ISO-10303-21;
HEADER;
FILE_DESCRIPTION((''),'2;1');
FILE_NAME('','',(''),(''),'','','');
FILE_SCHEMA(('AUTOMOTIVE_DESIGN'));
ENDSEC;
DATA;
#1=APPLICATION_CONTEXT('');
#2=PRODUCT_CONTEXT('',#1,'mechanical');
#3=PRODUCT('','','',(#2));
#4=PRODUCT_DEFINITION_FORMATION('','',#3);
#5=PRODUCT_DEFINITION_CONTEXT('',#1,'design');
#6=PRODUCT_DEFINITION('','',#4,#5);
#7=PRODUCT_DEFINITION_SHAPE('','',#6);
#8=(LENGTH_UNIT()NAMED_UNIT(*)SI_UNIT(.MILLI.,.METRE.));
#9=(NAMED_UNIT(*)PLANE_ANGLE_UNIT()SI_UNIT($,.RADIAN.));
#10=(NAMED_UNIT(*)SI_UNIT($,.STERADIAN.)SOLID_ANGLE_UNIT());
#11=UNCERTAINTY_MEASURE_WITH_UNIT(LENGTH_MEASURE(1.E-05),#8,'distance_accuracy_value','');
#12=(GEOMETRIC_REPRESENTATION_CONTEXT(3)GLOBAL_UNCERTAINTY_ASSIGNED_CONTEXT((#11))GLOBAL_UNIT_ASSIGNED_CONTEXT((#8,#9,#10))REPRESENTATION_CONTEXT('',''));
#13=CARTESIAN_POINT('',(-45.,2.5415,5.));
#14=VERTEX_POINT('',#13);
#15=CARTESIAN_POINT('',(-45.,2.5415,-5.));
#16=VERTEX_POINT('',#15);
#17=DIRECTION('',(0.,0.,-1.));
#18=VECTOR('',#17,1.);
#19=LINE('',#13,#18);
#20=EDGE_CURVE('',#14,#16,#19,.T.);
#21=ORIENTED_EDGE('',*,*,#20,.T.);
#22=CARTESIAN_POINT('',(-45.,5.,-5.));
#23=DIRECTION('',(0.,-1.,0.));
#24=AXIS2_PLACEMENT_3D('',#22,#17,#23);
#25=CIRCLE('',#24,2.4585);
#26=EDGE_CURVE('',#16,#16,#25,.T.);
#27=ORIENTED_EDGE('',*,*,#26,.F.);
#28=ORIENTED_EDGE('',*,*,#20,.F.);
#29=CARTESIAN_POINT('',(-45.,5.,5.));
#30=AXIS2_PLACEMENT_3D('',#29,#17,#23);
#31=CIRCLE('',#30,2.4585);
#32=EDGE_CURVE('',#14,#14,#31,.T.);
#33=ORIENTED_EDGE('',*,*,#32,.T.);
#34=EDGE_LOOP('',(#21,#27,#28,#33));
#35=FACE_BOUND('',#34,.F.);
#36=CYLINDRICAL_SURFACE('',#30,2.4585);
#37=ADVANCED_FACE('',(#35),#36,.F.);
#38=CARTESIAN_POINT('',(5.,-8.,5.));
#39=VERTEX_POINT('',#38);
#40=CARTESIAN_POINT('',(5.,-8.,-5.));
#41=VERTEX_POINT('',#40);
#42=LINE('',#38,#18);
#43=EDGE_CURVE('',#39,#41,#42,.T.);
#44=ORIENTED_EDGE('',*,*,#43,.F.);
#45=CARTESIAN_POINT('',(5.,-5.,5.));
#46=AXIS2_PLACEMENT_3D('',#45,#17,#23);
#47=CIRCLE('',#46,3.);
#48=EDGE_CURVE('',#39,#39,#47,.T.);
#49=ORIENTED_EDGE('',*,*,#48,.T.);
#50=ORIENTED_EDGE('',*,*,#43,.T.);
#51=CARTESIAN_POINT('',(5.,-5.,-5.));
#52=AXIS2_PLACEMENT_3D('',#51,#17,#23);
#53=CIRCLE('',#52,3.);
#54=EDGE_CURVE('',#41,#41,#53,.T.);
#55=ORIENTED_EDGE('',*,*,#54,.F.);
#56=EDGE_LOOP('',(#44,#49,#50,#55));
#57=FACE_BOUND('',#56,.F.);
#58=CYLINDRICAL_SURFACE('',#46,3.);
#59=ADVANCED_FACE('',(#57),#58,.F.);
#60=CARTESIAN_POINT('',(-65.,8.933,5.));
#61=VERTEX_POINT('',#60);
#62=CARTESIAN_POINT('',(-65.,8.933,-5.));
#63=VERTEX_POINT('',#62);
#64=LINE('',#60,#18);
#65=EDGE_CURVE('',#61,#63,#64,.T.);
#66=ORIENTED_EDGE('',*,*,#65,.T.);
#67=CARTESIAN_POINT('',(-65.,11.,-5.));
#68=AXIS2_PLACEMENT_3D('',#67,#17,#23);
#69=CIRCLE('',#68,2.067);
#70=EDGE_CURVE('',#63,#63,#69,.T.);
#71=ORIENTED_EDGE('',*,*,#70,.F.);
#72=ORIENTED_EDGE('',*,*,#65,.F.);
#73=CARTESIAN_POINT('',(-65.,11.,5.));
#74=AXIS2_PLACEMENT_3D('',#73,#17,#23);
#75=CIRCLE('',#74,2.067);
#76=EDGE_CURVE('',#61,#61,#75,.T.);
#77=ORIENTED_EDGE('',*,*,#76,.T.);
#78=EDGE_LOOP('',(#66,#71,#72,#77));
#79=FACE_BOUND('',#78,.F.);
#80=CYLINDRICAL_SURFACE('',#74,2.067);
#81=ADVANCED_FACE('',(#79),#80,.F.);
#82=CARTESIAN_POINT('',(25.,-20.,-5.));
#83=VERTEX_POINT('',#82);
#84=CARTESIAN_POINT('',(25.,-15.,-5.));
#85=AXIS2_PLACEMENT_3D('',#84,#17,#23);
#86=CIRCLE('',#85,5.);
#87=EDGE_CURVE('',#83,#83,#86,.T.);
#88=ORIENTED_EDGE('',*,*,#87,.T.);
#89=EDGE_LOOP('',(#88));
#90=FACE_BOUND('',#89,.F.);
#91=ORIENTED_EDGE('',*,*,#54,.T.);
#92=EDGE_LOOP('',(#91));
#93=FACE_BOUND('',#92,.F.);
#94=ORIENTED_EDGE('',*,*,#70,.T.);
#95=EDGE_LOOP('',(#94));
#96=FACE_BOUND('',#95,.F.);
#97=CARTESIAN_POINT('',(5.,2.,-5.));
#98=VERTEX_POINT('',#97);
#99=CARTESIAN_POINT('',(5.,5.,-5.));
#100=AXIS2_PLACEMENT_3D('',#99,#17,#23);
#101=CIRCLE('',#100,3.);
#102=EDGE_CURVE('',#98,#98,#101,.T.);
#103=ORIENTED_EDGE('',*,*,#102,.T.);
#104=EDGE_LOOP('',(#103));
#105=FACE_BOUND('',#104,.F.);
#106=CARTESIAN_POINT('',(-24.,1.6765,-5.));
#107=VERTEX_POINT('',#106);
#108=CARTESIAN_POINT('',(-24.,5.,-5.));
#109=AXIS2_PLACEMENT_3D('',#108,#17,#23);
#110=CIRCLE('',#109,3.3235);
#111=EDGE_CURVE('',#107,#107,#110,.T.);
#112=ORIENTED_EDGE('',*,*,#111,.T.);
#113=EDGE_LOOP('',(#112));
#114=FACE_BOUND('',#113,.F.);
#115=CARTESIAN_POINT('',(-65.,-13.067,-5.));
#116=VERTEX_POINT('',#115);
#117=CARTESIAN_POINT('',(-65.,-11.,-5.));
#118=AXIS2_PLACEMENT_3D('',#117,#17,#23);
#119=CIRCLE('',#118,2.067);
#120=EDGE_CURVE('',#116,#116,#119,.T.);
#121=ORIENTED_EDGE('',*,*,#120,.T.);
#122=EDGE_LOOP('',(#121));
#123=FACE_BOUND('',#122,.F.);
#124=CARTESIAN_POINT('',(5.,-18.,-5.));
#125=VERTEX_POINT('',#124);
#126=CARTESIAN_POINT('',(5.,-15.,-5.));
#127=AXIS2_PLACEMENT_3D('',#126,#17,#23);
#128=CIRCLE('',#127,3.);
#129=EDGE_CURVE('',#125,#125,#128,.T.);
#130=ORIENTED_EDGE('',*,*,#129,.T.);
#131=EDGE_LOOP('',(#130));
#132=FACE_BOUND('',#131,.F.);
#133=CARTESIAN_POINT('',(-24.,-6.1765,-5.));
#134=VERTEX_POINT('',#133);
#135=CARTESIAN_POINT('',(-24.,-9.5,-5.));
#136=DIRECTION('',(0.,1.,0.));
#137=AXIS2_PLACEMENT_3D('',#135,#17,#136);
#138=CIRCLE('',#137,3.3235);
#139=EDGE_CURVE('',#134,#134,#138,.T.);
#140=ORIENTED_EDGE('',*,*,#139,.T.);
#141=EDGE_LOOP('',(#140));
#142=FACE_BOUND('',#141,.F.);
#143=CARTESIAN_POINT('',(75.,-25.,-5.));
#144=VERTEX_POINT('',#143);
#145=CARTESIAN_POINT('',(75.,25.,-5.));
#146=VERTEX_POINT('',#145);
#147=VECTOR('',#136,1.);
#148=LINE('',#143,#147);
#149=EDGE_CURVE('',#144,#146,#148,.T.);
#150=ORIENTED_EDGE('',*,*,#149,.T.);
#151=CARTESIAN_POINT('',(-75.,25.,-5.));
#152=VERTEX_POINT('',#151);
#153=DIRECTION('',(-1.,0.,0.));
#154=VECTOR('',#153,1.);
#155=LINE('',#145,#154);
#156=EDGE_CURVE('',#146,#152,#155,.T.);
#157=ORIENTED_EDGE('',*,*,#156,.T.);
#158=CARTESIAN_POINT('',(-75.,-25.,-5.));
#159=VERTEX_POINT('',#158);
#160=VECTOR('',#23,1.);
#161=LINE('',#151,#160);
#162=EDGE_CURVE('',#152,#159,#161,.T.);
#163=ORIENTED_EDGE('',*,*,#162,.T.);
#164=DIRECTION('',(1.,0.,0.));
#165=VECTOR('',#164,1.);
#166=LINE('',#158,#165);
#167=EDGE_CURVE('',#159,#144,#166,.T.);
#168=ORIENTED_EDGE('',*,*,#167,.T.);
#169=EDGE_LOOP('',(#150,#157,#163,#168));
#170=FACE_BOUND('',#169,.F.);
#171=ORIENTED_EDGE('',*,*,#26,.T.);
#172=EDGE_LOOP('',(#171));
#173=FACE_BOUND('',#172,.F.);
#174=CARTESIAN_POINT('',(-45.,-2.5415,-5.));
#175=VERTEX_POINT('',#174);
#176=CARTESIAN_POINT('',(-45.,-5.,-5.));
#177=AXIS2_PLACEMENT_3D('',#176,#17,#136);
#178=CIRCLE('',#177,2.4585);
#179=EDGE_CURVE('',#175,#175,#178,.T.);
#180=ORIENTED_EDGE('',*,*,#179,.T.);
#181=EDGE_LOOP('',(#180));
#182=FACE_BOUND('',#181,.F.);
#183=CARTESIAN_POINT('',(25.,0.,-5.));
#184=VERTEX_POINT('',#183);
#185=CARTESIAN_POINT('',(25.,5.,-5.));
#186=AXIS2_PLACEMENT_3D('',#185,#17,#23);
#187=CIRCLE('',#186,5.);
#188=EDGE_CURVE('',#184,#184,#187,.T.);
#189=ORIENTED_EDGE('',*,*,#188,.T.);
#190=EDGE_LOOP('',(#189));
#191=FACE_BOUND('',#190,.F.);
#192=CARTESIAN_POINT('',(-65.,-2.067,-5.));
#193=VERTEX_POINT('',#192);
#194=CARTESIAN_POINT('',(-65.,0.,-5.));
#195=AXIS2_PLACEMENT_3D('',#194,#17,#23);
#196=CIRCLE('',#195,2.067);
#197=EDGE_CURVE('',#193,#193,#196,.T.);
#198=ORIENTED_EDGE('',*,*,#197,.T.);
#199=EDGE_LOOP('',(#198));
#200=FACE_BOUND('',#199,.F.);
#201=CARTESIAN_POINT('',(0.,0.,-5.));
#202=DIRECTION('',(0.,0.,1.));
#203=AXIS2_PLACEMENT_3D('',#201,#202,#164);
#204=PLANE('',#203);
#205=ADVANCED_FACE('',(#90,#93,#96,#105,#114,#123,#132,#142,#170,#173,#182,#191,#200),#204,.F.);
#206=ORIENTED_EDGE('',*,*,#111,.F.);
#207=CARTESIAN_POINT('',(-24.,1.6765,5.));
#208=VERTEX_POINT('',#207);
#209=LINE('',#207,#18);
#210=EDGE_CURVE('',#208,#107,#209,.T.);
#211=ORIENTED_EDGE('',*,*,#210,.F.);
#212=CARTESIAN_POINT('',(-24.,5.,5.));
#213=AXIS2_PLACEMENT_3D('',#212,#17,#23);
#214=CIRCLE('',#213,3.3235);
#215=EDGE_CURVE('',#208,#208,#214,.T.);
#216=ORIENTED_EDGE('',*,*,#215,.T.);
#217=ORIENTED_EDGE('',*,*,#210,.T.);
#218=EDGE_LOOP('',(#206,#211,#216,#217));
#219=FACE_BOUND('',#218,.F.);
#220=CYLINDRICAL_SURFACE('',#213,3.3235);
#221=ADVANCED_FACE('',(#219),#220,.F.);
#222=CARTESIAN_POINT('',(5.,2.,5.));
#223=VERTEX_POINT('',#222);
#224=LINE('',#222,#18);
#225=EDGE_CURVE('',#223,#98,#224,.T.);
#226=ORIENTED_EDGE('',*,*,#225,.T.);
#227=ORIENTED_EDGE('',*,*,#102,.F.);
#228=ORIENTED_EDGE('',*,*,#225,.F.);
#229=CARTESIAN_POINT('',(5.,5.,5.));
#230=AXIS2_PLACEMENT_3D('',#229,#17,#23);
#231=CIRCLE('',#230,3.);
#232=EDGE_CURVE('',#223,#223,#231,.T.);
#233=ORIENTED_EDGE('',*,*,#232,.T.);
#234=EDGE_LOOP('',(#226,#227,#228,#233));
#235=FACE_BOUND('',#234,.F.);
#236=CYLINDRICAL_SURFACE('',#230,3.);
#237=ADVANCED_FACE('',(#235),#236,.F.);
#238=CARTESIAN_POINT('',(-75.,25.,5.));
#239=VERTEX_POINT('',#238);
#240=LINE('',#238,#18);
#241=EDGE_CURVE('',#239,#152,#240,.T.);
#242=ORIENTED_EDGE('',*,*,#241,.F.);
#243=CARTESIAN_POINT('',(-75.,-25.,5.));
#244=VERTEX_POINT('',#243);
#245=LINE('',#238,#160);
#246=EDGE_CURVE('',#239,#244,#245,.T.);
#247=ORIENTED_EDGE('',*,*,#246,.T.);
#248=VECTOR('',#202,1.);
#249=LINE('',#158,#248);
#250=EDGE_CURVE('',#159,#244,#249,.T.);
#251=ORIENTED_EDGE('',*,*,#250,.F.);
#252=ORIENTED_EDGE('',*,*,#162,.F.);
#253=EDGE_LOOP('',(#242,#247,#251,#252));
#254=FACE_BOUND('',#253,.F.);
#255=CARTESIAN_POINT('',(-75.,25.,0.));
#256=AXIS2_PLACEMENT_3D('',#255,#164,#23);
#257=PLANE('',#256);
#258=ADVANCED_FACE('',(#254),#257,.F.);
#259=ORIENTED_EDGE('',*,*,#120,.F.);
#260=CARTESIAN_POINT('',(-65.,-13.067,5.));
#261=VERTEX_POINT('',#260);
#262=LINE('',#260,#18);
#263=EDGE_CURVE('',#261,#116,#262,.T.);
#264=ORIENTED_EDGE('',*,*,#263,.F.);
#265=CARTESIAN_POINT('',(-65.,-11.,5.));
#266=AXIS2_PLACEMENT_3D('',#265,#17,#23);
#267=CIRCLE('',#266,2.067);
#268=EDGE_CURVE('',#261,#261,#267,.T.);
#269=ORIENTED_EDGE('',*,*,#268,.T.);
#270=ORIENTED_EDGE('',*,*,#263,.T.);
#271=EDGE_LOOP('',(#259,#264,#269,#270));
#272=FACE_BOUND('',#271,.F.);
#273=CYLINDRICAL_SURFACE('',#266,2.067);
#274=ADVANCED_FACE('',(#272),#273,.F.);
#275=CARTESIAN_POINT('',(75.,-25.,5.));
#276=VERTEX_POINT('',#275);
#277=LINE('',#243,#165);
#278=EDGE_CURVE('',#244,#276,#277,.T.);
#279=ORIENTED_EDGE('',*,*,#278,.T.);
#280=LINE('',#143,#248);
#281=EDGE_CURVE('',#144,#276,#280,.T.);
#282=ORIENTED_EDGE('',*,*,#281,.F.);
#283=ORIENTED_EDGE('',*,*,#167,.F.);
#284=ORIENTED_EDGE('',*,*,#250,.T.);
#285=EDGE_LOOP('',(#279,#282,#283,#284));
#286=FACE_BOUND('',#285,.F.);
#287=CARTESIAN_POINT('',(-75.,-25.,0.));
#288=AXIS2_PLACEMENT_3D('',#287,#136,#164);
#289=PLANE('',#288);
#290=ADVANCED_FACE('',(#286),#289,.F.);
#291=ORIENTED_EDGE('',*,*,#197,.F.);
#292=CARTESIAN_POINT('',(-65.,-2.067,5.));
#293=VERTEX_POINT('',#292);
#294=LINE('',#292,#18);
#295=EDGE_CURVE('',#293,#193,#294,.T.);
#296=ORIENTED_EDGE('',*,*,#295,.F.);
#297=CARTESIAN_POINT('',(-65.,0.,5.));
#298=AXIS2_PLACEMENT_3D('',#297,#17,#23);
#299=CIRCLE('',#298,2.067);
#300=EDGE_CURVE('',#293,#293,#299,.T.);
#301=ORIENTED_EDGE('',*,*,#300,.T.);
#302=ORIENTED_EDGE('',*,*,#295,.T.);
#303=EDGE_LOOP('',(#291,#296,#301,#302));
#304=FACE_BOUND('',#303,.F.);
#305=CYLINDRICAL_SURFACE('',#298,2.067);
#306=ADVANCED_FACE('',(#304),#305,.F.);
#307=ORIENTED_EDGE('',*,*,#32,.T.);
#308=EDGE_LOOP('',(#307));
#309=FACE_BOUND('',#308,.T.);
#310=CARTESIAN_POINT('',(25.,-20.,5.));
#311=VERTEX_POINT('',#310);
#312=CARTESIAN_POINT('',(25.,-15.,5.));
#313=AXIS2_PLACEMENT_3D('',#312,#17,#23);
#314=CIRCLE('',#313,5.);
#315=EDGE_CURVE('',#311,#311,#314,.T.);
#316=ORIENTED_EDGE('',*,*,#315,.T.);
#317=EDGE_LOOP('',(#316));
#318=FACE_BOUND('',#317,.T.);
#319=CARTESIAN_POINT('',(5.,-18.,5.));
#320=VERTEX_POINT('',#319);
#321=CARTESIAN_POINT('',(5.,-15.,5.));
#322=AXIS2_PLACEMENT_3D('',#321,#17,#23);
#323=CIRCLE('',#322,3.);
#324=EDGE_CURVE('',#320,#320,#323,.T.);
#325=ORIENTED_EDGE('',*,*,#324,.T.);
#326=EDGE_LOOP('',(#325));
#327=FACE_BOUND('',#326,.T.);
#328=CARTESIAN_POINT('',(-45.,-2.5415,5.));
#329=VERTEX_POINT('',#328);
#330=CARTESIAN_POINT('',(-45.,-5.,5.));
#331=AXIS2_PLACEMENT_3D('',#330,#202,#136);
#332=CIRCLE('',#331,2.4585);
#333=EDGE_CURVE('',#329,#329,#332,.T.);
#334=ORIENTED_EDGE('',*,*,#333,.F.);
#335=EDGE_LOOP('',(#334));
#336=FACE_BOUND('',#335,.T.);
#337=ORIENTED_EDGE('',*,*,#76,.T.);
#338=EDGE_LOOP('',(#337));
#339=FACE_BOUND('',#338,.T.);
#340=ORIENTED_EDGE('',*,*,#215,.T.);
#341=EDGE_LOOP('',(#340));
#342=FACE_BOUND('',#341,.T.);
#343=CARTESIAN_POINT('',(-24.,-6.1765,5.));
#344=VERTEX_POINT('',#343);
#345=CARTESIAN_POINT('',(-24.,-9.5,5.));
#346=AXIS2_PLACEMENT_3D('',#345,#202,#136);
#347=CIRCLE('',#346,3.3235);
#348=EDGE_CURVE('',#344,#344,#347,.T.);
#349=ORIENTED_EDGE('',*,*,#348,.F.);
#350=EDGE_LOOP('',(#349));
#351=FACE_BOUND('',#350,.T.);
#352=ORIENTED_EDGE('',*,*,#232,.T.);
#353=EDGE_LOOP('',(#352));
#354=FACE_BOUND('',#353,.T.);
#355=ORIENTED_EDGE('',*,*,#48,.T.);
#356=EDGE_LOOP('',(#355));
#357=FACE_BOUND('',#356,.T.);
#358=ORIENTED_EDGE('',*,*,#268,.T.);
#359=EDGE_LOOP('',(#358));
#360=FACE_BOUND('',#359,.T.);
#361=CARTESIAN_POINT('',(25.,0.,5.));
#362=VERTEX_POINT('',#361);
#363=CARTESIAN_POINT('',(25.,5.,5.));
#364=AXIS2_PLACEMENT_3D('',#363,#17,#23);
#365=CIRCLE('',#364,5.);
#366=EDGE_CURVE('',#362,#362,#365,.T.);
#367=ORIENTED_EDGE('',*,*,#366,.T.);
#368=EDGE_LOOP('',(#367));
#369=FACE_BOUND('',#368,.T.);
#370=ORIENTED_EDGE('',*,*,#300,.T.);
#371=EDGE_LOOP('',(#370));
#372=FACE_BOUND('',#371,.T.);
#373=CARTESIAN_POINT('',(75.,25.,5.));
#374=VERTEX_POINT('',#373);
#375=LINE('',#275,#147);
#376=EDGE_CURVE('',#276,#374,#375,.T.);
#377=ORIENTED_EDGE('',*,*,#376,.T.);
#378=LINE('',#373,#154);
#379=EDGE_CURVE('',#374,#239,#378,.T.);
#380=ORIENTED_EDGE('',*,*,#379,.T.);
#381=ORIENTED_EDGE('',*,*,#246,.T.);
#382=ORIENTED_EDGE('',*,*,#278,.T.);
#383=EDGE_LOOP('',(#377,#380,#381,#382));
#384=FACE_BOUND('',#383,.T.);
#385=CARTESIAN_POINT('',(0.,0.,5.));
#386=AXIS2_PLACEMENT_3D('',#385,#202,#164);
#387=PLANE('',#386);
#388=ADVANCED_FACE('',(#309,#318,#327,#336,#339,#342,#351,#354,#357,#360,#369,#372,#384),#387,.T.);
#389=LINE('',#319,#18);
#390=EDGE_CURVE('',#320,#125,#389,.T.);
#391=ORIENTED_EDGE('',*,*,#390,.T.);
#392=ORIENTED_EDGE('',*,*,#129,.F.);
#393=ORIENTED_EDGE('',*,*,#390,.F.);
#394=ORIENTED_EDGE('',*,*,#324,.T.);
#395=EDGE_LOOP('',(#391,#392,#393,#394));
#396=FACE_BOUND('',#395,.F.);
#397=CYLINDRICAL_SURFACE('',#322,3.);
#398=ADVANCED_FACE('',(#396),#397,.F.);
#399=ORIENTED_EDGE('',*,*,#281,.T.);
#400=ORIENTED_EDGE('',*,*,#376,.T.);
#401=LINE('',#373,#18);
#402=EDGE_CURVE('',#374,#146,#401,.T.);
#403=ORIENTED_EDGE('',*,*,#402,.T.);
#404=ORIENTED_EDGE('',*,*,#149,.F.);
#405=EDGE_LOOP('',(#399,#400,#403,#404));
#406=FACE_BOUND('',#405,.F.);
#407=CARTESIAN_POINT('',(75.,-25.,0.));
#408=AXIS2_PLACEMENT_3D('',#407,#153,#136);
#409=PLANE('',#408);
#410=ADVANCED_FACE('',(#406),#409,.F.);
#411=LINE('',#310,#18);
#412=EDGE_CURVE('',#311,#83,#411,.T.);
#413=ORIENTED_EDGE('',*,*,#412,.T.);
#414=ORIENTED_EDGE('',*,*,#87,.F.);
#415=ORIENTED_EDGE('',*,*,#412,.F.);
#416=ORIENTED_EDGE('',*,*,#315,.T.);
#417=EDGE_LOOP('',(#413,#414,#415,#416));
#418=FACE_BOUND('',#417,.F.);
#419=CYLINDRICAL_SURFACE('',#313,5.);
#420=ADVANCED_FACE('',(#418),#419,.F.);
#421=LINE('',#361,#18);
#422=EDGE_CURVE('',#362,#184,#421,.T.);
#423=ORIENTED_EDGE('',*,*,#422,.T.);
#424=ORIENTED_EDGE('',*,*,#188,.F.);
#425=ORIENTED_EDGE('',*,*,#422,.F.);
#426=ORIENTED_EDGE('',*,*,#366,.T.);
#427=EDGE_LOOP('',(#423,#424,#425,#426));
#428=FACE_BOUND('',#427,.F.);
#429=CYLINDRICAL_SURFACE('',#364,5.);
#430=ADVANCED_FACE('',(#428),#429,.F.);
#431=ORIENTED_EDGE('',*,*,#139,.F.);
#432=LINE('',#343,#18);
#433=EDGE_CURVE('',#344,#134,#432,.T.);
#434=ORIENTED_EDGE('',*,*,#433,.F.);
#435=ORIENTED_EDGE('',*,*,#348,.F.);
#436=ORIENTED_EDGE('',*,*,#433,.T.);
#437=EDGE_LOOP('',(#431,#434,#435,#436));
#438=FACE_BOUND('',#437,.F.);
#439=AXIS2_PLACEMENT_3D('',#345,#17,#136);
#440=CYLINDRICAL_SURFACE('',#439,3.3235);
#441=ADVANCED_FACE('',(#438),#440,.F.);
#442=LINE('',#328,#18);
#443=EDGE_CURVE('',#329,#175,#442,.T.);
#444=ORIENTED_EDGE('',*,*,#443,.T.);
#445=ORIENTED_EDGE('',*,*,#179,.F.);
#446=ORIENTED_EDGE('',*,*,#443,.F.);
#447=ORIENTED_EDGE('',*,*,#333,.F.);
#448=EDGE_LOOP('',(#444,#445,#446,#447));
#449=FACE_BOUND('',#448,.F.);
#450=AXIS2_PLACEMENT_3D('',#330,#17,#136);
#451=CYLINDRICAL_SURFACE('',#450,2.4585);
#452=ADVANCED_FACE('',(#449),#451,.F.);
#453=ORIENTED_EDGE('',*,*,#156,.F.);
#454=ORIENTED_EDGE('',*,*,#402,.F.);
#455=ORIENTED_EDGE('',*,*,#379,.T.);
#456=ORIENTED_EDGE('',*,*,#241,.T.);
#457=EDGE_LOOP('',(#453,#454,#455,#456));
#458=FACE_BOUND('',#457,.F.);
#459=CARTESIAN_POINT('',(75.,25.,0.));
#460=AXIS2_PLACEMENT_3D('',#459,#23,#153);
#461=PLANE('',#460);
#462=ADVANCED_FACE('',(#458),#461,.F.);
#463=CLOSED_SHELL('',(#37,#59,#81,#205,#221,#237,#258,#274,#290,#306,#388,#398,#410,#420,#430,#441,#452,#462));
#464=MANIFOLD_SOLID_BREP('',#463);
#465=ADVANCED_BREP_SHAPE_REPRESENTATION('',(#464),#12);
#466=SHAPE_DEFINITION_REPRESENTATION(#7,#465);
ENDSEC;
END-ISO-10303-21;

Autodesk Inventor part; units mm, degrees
ref_plane "YZ Plane" through (0, 0, 0) normal (1, 0, 0) x (0, 1, 0)
ref_plane "XY Plane" through (0, 0, 0) normal (0, 0, 1) x (1, 0, 0)
sketch "Sketch2" plane through (0, 0, 0) normal (0, 0, 1) x (1, 0, 0)
  line L0 (-75, -25) -> (75, -25)
  line L1 (75, -25) -> (75, 25)
  line L2 (75, 25) -> (-75, 25)
  line L3 (-75, 25) -> (-75, -25)
  line L4 (-75, -25) -> (75, 25) construction
  line L5 (75, -25) -> (-75, 25) construction
  point P0 (0, 0)
  dimension "d1" = 150
  dimension "d2" = 50
extrude "Extrusion1" add sketch "Sketch2" along normal mid plane 10
sketch "Sketch3" plane through (0, 0, 5) normal (0, 0, 1) x (1, 0, 0)
  line L0 (-75, 25) -> (-75, -25) projected
  line L1 (75, 25) -> (-75, 25) projected
  point P0 (0, 0)
  point P1 (-65, 0)
  dimension "d40" = 10
  dimension "d43" = 25
hole "Hole1" at (-65, 0, 5) direction (0, 0, -1) diameter 4.134 depth 14.2 tip angle 118 thread size "M5x0.8" class "6H" standard "TS profile"
sketch "Sketch4" plane through (0, 0, 5) normal (0, 0, 1) x (1, 0, 0)
  line L0 (-75, 25) -> (-75, -25) projected
  line L1 (75, 25) -> (-75, 25) projected
  point P0 (0, 0)
  point P1 (-45, 5)
  dimension "d41" = 30
  dimension "d42" = 20
hole "Hole2" at (-45, 5, 5) direction (0, 0, -1) diameter 4.917 depth 17.1 tip angle 118 thread size "M6x1" class "6H" standard "TS profile"
sketch "Sketch5" plane through (0, 0, 5) normal (0, 0, 1) x (1, 0, 0)
  line L0 (-75, 25) -> (-75, -25) projected
  line L1 (75, 25) -> (-75, 25) projected
  point P0 (0, 0)
  point P1 (-24, 5)
  dimension "d44" = 51
  dimension "d45" = 20
hole "Hole3" at (-24, 5, 5) direction (0, 0, -1) diameter 6.647 depth 22.2 tip angle 118 thread size "M8x1.25" class "6H" standard "TS profile"
sketch "Sketch6" plane through (0, 0, 5) normal (0, 0, 1) x (1, 0, 0)
  line L0 (-75, 25) -> (-75, -25) projected
  line L1 (75, 25) -> (-75, 25) projected
  point P0 (0, 0)
  point P1 (5, 5)
  dimension "d46" = 80
  dimension "d47" = 20
hole "Hole4" at (5, 5, 5) direction (0, 0, -1) diameter 6 depth 14.2 tip angle 118
sketch "Sketch7" plane through (0, 0, 5) normal (0, 0, 1) x (1, 0, 0)
  line L0 (-75, 25) -> (-75, -25) projected
  line L1 (75, 25) -> (-75, 25) projected
  point P0 (0, 0)
  point P1 (25, 5)
  dimension "d48" = 100
  dimension "d49" = 20
hole "Hole5" at (25, 5, 5) direction (0, 0, -1) diameter 10 depth 14.2 tip angle 118
pattern_linear "Rectangular Pattern1" count 3 spacing 11 along (0, -1, 0) of "Hole1" first direction both ways yes
mirror "Mirror1" about plane through (0, 0, 0) normal (0, 1, 0) of "Hole2"
pattern_linear "Rectangular Pattern2" count 3 spacing 10 along (0, -1, 0) of "Hole4"
ref_plane "Work Plane1" through (0, -2.25, 0) normal (0, 1, 0) x (-1, 0, 0)
mirror "Mirror3" about plane through (0, -2.25, 0) normal (0, 1, 0) of "Hole3"
pattern_linear "Rectangular Pattern3" count 2 spacing 20 along (0, -1, 0) of "Hole5"
ref_plane "Work Plane2" through (0, -2.25, 0) normal (0, 1, 0) x (-1, 0, 0)
properties part number "홀간 거리 확인 파트-4" material "SS400"
